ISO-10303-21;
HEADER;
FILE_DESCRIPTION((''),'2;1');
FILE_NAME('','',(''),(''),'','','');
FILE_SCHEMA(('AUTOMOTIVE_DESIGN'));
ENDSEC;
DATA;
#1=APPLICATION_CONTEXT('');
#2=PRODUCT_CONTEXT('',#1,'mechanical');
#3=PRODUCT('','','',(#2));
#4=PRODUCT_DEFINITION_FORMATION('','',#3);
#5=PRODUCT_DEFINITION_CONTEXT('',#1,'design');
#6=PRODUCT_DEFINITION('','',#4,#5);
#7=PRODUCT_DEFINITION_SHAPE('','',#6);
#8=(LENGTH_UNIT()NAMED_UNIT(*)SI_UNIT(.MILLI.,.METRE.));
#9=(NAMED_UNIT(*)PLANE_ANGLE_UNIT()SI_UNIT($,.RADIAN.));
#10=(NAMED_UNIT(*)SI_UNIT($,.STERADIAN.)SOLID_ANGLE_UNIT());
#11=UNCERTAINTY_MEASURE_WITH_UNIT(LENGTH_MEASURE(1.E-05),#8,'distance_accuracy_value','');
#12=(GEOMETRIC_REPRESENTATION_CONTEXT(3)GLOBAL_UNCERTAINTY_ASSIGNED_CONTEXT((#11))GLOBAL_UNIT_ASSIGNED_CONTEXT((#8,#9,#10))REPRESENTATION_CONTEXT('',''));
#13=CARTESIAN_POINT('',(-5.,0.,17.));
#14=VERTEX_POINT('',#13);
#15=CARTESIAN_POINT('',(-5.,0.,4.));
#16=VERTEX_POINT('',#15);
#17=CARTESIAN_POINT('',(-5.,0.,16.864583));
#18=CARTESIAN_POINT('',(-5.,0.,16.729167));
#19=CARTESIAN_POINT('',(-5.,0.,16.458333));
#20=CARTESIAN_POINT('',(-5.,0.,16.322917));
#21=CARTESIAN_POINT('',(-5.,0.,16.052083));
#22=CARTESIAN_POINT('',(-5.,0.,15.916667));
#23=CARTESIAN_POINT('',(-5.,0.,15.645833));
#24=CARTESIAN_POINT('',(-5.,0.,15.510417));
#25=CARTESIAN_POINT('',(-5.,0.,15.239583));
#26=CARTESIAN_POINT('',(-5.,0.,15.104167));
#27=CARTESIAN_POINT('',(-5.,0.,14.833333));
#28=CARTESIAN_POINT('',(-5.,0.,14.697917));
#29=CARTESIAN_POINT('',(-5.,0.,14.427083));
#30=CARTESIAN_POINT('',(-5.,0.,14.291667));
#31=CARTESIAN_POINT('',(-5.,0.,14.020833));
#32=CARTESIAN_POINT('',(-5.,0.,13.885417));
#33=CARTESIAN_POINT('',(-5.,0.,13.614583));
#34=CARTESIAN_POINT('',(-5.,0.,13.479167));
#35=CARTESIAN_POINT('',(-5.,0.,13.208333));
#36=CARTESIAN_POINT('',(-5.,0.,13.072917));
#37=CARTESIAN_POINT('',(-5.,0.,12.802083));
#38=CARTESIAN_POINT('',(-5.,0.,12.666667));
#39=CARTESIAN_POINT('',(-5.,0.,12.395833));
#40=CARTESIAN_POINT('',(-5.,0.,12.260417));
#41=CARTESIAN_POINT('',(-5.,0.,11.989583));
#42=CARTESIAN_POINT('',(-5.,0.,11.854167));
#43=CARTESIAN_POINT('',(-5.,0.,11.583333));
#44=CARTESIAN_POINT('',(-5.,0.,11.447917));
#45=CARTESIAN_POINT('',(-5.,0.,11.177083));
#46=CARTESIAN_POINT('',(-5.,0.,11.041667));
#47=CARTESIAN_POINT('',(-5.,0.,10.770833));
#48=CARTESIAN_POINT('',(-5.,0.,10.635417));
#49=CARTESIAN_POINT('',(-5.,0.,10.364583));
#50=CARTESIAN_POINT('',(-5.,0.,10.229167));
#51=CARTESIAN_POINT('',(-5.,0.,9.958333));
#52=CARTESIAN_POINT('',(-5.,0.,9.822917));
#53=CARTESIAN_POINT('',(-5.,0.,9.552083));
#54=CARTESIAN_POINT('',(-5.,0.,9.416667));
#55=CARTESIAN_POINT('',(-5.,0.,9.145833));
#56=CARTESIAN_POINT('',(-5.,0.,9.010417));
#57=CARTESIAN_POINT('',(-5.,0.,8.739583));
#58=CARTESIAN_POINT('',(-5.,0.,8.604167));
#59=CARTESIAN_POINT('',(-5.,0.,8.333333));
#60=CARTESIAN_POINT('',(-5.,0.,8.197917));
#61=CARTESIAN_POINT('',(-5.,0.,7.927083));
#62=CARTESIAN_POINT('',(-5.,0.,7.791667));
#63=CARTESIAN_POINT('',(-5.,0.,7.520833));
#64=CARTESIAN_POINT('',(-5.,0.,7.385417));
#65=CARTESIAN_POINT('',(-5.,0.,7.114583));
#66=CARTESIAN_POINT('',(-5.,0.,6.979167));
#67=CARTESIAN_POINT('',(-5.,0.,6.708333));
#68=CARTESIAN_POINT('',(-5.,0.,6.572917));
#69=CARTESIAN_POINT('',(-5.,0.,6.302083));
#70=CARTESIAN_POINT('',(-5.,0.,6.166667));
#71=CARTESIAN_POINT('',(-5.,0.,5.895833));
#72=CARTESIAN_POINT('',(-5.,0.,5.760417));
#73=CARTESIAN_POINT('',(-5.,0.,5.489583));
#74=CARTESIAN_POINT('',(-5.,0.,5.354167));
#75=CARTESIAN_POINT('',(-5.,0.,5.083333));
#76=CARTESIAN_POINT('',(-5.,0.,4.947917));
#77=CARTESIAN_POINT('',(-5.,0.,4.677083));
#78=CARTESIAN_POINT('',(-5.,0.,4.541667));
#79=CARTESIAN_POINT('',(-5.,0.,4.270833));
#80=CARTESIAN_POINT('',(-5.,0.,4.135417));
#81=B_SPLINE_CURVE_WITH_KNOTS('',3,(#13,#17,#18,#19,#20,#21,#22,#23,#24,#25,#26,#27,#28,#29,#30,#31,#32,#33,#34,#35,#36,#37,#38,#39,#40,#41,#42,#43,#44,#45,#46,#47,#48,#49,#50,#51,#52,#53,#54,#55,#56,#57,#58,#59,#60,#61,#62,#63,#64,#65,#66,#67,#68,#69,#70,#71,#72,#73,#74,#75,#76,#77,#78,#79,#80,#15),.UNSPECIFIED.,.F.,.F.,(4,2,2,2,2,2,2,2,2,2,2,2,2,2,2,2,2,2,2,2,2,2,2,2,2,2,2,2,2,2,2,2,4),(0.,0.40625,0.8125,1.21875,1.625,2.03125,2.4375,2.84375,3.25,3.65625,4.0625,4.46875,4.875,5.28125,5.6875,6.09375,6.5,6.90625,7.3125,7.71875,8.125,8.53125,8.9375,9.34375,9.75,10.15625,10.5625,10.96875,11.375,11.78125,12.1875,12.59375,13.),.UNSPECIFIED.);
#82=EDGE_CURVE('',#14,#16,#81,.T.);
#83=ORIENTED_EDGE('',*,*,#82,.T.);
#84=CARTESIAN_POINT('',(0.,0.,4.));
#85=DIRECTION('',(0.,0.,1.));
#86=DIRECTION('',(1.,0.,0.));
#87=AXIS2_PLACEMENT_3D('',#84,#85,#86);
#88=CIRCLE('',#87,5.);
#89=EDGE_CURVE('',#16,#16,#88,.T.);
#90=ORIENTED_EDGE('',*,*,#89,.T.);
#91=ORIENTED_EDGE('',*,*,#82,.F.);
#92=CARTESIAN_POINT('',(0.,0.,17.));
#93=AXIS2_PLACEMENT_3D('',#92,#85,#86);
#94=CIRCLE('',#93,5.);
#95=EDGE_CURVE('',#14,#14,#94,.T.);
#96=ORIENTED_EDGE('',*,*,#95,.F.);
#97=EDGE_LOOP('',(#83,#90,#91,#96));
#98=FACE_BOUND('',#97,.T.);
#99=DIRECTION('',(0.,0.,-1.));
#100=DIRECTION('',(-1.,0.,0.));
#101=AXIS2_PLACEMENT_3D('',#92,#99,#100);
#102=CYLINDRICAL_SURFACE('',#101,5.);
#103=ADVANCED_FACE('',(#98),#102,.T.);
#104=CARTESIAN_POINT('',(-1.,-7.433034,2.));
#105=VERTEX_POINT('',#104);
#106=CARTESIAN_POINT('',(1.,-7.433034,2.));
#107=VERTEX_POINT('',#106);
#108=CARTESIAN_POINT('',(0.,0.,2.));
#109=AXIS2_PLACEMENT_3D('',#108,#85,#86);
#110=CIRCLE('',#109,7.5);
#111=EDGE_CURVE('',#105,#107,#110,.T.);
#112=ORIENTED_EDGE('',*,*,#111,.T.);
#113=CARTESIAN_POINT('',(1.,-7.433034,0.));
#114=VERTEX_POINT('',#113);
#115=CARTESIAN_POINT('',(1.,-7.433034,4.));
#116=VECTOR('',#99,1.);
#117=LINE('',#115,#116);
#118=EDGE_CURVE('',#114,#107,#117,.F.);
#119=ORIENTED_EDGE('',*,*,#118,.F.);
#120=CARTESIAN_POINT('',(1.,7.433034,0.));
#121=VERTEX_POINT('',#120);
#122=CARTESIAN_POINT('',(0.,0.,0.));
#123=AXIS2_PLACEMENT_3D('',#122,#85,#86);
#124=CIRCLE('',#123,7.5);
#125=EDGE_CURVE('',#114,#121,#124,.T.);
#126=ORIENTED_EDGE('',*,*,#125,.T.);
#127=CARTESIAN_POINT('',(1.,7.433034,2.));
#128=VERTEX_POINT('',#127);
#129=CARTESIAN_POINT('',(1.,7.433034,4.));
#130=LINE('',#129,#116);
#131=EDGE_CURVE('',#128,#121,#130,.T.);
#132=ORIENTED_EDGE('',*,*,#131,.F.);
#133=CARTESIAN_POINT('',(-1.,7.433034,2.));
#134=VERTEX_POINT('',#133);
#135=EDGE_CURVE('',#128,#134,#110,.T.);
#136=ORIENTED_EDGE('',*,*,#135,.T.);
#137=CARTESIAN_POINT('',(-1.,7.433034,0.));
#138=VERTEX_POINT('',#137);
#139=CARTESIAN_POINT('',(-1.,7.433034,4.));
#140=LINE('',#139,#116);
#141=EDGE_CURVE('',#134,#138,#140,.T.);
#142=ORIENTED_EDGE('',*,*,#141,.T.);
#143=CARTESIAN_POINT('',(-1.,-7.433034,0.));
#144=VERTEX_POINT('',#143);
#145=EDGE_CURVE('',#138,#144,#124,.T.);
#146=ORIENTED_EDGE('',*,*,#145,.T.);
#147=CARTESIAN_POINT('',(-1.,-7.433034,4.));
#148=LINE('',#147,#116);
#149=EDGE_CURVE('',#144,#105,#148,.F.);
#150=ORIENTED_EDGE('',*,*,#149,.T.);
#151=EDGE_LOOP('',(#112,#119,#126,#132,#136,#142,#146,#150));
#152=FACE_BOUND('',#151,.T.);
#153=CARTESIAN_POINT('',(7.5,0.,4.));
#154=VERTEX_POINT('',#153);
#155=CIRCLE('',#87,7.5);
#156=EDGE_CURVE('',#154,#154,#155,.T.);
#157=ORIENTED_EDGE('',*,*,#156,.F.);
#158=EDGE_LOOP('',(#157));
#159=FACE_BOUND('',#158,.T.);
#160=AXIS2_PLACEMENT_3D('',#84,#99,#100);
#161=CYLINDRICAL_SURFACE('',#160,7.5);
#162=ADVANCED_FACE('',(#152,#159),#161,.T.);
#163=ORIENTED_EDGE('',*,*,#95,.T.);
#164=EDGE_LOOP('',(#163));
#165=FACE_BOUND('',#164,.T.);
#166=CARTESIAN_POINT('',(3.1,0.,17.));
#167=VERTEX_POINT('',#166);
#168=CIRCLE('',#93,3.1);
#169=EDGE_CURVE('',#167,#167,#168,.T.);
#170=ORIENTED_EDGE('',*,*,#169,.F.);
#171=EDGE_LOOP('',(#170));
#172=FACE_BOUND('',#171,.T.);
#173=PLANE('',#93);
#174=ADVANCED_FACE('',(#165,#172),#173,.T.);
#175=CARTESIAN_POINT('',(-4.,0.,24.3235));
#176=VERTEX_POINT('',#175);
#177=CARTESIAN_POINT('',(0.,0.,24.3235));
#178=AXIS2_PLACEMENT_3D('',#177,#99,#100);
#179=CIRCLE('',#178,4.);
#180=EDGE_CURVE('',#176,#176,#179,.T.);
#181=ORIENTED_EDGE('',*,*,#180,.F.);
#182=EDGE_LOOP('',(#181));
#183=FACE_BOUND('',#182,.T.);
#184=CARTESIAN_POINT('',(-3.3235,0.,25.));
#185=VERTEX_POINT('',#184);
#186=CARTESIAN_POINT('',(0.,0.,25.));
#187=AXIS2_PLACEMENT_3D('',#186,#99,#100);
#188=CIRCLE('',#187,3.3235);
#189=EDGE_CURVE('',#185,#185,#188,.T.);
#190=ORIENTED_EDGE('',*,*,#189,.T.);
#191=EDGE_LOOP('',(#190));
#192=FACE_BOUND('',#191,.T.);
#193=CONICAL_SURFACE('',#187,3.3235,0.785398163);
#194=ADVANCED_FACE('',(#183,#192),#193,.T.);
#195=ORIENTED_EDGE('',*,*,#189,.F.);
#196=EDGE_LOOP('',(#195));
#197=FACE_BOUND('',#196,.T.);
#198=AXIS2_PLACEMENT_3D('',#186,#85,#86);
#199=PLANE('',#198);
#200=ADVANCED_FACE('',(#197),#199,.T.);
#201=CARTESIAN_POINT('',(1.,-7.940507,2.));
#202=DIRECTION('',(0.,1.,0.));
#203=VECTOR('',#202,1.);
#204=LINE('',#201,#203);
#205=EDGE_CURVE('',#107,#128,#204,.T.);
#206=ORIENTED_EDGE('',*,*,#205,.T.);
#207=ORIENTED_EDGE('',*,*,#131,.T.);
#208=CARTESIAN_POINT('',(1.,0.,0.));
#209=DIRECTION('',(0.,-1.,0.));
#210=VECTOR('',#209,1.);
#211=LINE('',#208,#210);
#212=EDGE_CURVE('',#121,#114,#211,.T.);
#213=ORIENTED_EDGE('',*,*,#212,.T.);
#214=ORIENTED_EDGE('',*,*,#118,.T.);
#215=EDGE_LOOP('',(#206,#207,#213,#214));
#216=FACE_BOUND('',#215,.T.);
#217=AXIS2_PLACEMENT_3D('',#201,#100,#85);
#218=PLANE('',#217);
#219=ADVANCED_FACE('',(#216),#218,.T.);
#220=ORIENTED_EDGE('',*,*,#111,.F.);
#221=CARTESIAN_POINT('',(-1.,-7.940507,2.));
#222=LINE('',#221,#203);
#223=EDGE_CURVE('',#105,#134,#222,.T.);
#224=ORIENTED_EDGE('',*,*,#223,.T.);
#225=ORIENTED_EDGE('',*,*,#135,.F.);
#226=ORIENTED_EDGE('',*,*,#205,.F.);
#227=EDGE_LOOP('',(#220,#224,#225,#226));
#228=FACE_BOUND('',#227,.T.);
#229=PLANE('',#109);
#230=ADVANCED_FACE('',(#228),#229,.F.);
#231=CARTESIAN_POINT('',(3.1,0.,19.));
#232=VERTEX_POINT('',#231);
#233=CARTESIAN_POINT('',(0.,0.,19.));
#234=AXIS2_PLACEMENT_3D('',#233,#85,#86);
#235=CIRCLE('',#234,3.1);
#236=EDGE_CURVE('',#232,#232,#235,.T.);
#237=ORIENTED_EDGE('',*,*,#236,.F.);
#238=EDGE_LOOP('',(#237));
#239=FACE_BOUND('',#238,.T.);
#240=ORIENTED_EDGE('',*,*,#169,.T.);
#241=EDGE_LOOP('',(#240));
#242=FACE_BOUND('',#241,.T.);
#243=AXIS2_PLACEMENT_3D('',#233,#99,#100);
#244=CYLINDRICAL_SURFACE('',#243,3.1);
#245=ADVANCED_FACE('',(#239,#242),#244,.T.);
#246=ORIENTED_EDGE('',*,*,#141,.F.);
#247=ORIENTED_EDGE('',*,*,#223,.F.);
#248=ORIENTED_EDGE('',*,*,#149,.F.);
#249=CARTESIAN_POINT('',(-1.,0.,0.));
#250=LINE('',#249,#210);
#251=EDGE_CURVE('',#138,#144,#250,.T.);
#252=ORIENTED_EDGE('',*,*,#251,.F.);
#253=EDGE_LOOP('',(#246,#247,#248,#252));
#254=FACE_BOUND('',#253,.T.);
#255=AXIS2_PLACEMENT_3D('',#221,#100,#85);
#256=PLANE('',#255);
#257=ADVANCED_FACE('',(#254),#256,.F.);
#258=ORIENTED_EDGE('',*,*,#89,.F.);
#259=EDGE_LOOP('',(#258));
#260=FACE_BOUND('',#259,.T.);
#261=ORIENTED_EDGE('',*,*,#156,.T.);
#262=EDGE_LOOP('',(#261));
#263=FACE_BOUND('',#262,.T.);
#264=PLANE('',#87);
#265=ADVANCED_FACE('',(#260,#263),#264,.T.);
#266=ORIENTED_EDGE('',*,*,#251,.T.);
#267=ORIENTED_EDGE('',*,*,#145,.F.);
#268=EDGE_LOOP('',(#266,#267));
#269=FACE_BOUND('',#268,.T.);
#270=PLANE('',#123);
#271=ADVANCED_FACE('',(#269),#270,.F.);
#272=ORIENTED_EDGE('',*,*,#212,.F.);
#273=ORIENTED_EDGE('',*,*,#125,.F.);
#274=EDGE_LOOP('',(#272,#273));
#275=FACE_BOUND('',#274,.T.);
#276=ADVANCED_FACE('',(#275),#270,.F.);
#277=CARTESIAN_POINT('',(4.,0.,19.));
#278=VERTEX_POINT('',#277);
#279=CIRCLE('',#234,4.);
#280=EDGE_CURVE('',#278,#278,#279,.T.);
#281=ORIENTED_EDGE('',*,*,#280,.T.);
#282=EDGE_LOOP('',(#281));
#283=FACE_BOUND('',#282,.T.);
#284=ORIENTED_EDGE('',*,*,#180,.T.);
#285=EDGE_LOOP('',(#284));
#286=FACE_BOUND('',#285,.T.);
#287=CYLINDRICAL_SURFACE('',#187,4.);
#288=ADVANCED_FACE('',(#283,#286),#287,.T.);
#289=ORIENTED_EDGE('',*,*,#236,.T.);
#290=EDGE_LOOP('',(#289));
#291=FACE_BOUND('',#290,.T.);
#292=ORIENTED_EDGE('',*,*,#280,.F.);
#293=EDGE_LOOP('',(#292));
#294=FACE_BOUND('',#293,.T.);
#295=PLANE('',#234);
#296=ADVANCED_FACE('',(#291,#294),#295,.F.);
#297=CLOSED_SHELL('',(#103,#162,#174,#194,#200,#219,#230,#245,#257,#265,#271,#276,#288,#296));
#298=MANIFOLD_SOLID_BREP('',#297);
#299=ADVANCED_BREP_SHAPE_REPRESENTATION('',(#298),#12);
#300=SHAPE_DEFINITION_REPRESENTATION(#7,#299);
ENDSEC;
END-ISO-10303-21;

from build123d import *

# Parameters (mm, degrees)
SKETCH_1_R          = 7.5
EXTRUDE_1_DEPTH     = 4
SKETCH_2_R          = 5
EXTRUDE_2_DEPTH     = 13
SKETCH_3_R          = 3.1
EXTRUDE_3_DEPTH     = 2
SKETCH_4_R          = 4
EXTRUDE_4_DEPTH     = 6
SKETCH_6_W          = 2
SKETCH_6_H          = 15.894764062
CUT_EXTRUDE_2_DEPTH = 2


# Read off the part's stored shape, not the designer's step: M8 机械螺纹 螺柱1
with BuildPart() as part:
    # 草图1 → 凸台-拉伸1 (new body)
    with BuildSketch(Plane.XY):
        Circle(SKETCH_1_R)
    extrude(amount=EXTRUDE_1_DEPTH)

    # 草图2 → 凸台-拉伸2 (add)
    with BuildSketch(Plane.XY.offset(4)):
        with Locations(Location((0, 0, 0), (0, 0, 180))):
            Circle(SKETCH_2_R)
    extrude(amount=EXTRUDE_2_DEPTH)

    # 草图3 → 凸台-拉伸3 (add)
    with BuildSketch(Plane.XY.offset(17)):
        Circle(SKETCH_3_R)
    extrude(amount=EXTRUDE_3_DEPTH)

    # 草图4 → 凸台-拉伸4 (add)
    with BuildSketch(Plane.XY.offset(19)):
        Circle(SKETCH_4_R)
    extrude(amount=EXTRUDE_4_DEPTH)

    # M8 机械螺纹 螺柱1 outline → M8 机械螺纹 螺柱1 (revolve, cut)
    with BuildSketch(Plane.XZ):
        Polygon((4, 25), (3.3235, 25), (4, 24.3235), align=None)
    revolve(axis=Axis((0, 0, 0), (0, 0, 1)), mode=Mode.SUBTRACT)

    # 草图6 → 切除-拉伸-薄壁2 (cut)
    with BuildSketch(Plane(origin=(0, 0, 0), x_dir=(-1, 0, 0), z_dir=(0, 0, -1))):
        with Locations((0, 0.006874898)):
            Rectangle(SKETCH_6_W, SKETCH_6_H)
    extrude(amount=-CUT_EXTRUDE_2_DEPTH, mode=Mode.SUBTRACT)


solid = part.part
